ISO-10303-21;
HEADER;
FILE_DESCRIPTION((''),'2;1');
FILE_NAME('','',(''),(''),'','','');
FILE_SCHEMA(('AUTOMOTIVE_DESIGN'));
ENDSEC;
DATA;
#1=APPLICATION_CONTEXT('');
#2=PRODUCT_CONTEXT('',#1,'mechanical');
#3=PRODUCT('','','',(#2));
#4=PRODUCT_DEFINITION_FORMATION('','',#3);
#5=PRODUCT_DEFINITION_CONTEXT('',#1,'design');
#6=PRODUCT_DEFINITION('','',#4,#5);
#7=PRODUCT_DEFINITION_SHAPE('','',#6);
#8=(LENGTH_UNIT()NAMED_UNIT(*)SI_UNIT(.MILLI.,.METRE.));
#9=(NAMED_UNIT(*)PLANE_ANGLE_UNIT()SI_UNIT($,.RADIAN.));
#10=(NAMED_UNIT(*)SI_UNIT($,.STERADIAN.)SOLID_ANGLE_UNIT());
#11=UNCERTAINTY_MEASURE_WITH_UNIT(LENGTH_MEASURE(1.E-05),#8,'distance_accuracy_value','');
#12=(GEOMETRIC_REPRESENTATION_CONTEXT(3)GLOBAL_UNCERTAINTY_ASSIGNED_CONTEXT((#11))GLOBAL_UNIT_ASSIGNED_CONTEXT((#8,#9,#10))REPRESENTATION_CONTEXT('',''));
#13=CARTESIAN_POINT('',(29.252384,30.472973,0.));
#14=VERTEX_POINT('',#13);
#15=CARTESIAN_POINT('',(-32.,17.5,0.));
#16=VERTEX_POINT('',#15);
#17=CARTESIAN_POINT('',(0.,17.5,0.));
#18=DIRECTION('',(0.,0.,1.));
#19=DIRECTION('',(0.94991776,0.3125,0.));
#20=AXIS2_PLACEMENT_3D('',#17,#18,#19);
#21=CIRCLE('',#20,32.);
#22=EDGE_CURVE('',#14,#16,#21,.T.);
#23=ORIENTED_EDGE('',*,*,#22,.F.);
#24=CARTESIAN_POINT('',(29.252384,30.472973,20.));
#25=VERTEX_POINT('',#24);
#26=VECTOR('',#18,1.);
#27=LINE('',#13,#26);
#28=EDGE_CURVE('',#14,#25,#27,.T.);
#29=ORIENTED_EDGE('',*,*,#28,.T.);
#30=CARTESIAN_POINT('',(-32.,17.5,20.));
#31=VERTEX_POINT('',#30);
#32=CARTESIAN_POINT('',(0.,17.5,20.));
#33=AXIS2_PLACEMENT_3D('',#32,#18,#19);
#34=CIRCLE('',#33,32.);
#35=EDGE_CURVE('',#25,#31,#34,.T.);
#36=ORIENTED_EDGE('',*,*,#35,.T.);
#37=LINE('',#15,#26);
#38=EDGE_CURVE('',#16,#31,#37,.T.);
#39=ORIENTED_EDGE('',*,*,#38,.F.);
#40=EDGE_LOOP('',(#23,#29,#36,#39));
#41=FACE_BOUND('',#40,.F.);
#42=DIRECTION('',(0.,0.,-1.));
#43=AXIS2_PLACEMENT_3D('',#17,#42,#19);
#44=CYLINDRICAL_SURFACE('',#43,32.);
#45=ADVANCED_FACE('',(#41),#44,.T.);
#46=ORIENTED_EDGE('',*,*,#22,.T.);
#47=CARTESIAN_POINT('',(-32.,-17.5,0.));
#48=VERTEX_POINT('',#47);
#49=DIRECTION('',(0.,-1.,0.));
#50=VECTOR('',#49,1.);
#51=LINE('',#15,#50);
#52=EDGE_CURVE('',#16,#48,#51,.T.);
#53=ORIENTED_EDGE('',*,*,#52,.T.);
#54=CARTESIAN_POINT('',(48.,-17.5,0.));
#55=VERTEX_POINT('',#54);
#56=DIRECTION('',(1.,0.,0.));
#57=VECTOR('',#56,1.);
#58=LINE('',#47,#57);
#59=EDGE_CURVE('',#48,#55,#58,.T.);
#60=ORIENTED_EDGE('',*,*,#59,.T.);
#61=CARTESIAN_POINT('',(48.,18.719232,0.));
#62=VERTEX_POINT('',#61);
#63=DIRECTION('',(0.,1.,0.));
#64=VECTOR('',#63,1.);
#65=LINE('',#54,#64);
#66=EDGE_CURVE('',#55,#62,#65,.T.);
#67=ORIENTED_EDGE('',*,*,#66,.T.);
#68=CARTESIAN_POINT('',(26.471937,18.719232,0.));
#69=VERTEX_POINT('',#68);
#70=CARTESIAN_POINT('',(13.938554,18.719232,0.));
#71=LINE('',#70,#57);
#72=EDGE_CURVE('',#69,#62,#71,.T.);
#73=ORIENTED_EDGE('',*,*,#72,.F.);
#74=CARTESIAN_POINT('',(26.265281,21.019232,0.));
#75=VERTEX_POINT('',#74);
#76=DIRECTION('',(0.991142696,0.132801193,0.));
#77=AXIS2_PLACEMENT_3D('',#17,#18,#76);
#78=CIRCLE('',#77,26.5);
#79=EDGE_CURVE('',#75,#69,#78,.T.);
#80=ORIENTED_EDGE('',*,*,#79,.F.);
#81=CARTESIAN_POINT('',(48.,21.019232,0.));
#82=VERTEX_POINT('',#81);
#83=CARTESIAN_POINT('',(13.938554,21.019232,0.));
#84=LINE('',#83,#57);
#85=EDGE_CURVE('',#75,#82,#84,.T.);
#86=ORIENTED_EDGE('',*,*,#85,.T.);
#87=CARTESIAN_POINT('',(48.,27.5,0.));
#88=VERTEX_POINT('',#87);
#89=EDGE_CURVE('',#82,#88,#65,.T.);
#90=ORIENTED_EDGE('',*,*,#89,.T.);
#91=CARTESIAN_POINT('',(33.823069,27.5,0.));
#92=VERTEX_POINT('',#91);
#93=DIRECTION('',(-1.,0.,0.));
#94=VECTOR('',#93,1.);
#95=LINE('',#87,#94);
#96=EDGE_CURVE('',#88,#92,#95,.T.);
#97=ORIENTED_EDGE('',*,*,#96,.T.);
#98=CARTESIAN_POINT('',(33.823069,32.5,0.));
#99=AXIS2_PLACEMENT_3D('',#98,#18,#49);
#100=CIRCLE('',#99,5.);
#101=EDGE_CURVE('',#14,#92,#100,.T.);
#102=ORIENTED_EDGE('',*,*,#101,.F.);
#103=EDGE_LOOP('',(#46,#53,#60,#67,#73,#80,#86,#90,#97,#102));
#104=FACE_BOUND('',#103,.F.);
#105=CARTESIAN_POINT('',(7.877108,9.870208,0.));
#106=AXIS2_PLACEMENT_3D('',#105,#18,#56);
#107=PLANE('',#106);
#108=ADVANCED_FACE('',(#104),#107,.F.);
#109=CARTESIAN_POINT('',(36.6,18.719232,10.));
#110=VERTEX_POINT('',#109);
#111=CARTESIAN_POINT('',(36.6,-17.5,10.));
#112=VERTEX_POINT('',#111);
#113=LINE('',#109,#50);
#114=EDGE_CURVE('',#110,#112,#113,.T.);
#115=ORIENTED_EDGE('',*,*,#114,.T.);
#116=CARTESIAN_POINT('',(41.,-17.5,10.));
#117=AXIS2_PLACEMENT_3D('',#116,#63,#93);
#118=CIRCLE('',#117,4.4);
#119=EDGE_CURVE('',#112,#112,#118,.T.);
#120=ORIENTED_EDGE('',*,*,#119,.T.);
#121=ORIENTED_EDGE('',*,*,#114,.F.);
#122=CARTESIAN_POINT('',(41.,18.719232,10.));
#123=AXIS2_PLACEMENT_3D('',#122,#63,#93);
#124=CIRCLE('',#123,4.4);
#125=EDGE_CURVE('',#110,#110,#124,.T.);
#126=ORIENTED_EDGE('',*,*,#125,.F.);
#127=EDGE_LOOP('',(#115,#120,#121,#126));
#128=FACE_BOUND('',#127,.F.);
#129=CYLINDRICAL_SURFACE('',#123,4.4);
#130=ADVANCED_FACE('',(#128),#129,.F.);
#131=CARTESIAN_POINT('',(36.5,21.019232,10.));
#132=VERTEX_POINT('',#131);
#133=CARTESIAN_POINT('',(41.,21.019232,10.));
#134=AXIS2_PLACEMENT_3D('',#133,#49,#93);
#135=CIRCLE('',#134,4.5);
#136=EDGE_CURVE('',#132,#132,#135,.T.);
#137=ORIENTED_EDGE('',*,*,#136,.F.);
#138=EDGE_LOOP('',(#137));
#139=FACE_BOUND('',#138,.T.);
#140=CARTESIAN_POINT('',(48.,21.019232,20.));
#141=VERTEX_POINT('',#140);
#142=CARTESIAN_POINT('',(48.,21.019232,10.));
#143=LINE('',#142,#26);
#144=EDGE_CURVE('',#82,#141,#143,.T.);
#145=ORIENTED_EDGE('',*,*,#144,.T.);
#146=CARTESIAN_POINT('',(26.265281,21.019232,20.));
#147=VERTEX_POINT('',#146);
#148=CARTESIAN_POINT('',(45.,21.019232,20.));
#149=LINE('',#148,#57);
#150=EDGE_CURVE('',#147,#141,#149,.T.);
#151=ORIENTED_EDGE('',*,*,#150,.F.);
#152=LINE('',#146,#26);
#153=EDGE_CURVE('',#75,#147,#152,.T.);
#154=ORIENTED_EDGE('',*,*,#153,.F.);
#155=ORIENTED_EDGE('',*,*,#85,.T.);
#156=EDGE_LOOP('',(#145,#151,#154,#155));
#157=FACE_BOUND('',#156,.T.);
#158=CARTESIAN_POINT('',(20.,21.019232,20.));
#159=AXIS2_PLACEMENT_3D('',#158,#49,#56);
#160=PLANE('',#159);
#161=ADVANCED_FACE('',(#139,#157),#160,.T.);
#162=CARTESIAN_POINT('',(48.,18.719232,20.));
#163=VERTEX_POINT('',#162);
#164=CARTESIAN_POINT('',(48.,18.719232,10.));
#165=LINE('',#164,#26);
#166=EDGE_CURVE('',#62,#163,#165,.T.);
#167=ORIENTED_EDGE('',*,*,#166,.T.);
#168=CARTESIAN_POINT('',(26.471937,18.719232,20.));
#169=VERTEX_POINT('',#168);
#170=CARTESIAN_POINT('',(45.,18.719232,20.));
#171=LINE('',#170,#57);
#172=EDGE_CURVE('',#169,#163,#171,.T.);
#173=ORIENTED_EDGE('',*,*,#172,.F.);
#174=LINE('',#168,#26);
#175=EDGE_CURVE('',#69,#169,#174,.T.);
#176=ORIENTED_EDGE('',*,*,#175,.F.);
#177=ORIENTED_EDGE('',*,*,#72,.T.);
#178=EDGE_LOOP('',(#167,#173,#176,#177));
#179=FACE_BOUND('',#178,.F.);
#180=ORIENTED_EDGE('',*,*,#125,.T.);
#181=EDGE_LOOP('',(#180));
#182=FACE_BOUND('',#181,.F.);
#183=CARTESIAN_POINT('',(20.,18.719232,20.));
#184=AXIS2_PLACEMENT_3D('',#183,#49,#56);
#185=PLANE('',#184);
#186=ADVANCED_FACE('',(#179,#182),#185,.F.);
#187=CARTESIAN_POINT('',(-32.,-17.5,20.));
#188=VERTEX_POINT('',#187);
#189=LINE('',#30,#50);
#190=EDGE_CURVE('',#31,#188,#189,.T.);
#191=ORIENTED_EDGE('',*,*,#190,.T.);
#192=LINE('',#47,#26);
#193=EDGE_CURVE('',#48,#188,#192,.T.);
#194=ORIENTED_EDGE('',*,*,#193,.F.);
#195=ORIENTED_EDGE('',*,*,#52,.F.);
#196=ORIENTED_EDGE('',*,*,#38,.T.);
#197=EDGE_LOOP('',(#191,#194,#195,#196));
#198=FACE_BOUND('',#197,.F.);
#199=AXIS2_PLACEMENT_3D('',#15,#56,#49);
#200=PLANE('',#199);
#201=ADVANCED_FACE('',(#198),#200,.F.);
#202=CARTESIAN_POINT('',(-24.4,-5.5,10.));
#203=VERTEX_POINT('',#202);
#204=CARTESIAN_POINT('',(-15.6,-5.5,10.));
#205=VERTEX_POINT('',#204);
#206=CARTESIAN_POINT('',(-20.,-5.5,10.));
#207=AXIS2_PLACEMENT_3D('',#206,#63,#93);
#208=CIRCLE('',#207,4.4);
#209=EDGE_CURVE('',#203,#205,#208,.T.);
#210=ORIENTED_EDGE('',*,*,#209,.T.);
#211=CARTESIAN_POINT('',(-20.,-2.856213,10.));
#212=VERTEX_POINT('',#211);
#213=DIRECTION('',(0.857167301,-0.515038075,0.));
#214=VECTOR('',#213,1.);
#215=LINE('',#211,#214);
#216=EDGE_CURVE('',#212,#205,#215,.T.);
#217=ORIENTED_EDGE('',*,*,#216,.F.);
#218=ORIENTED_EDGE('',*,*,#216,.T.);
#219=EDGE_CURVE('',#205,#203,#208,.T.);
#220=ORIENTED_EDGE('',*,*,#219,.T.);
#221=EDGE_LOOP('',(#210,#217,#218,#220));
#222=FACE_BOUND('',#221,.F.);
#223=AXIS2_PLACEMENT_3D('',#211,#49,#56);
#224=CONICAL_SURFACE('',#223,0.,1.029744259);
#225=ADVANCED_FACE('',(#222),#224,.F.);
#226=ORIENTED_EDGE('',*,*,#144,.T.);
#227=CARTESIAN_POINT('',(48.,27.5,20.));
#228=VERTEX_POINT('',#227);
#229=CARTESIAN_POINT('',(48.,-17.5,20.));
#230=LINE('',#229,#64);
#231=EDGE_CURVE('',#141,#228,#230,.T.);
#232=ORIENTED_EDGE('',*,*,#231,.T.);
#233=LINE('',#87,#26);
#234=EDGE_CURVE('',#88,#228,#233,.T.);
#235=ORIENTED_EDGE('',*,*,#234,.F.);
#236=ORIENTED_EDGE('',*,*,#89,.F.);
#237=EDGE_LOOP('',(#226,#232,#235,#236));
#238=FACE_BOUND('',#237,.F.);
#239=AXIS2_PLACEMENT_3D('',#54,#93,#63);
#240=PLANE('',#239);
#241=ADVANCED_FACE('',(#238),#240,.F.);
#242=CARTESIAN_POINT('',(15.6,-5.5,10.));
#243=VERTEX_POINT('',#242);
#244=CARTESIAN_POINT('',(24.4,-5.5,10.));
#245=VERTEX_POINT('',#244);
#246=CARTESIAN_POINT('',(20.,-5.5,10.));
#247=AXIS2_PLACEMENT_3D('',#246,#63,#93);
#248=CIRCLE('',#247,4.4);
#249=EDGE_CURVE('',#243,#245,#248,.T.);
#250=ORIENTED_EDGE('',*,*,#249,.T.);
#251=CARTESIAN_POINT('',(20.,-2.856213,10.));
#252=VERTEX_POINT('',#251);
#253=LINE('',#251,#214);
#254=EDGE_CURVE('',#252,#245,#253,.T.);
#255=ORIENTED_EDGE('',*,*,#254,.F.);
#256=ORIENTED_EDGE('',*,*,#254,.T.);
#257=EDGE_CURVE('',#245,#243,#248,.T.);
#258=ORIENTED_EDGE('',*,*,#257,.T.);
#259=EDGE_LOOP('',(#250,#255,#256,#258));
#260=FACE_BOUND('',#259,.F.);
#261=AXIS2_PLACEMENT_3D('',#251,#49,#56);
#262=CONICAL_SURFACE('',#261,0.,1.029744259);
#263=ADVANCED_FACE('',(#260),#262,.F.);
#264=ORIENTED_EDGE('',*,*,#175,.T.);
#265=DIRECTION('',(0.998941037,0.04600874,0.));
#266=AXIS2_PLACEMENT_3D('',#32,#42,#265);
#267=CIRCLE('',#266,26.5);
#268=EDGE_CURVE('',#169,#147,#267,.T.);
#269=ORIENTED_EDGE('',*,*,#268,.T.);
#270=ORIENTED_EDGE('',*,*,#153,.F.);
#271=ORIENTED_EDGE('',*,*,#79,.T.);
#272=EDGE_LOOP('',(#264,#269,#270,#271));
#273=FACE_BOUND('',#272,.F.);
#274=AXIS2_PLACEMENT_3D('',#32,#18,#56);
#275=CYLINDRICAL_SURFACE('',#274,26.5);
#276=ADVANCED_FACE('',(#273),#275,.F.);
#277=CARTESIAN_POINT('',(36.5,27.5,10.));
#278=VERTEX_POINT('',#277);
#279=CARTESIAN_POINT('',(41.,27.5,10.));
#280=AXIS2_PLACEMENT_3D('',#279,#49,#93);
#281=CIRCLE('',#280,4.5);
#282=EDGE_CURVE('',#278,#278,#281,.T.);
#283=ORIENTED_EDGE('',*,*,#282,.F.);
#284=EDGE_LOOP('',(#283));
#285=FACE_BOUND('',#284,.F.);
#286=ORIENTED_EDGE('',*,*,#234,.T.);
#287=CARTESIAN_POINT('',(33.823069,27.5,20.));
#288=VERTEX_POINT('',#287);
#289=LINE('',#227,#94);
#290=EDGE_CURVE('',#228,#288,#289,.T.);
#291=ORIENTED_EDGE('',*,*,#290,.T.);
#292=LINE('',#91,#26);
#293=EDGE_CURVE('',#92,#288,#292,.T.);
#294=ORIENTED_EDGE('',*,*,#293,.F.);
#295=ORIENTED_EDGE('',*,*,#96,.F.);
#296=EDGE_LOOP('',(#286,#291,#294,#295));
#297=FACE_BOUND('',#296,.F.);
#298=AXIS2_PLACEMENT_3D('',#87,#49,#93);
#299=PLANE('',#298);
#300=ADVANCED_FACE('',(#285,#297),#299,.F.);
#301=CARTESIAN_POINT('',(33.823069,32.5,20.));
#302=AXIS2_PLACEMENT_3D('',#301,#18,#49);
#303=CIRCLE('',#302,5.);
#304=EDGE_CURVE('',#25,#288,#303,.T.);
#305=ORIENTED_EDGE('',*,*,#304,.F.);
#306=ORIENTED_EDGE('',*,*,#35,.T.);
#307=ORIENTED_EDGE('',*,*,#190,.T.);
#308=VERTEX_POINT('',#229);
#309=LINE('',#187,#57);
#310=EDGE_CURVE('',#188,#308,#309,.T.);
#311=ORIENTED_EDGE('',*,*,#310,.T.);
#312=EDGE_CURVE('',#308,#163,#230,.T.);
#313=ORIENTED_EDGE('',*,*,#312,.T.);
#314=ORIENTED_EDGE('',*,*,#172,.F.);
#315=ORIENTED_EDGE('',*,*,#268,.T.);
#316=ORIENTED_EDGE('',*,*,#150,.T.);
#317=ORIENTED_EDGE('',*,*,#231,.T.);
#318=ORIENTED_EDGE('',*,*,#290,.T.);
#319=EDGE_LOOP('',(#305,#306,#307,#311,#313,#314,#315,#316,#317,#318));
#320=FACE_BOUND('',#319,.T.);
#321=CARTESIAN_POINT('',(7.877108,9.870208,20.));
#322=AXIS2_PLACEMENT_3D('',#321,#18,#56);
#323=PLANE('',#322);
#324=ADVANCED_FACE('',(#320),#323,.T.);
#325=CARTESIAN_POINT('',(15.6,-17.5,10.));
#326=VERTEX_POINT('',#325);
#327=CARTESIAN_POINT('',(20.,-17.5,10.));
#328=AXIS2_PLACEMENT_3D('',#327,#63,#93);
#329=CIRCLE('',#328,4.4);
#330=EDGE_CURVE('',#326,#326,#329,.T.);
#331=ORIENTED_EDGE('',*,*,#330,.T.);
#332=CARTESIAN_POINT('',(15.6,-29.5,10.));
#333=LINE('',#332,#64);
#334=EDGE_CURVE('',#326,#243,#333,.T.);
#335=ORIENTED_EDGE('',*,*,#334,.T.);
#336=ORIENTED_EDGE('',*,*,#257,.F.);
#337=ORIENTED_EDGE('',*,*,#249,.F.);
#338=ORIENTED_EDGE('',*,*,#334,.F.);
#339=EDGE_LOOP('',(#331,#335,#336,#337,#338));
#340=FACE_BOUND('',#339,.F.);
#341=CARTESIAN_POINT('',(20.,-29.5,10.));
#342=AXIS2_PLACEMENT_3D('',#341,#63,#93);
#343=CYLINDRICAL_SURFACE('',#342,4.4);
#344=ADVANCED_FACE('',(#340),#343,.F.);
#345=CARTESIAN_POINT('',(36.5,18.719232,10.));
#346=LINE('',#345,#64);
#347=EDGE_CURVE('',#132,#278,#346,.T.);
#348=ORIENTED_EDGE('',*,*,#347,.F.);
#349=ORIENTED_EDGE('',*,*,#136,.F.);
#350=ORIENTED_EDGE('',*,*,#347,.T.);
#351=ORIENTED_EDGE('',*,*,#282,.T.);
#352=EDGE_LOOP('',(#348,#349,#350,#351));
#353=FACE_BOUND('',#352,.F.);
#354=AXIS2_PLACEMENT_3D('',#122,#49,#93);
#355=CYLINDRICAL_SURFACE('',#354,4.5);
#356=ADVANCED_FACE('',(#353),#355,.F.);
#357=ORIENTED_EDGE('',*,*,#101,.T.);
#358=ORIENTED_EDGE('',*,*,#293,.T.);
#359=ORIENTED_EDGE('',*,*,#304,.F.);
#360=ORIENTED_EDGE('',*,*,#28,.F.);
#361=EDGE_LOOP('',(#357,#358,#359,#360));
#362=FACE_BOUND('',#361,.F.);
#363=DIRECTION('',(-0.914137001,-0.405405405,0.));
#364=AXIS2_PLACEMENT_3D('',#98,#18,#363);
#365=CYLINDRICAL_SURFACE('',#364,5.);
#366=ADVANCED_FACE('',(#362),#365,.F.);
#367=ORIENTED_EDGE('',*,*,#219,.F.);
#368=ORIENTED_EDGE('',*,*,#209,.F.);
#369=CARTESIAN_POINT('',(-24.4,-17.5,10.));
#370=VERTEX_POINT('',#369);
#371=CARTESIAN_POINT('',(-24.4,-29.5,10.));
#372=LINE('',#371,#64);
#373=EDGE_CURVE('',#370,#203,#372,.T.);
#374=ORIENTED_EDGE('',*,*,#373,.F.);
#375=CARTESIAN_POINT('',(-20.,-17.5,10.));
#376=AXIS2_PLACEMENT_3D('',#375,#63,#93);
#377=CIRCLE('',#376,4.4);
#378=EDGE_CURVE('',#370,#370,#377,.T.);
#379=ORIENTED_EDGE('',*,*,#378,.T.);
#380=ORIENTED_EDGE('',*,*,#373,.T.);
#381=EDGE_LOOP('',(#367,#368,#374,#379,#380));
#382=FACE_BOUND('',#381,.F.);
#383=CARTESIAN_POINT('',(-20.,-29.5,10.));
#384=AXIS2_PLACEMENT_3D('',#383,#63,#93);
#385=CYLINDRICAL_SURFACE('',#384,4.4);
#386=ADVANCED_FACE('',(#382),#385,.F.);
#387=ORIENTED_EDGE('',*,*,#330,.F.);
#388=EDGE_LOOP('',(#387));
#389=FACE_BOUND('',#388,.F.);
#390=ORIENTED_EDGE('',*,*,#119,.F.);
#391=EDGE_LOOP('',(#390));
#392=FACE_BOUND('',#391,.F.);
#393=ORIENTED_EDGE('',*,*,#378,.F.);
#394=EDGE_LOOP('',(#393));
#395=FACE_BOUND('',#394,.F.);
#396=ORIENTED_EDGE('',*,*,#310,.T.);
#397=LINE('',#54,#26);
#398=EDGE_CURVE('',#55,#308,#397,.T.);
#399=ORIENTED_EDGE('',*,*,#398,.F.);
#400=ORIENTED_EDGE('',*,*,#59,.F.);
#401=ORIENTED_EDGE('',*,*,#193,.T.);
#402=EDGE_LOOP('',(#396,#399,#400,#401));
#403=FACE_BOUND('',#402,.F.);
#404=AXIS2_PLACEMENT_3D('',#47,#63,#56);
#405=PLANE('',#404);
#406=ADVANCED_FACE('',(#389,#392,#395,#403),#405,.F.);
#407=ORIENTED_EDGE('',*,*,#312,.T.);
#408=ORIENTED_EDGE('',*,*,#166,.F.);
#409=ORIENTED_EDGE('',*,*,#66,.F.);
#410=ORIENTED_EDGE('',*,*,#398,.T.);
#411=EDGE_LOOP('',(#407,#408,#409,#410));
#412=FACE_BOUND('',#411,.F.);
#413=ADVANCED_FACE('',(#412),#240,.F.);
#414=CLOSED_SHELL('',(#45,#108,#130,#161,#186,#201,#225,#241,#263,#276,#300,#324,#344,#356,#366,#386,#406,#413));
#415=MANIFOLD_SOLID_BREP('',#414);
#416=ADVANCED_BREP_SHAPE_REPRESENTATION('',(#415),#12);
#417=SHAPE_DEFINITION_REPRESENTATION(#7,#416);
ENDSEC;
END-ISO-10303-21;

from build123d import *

# Parameters (mm, degrees)
F1_DEPTH  = 20
F2_R      = 26.5
F3_DEPTH  = 20
F4_W      = 50
F4_H      = 2.3
F5_DEPTH  = 20.001
F7_D      = 8.8
F7_DEPTH  = 12
F7_TIP    = 2.6437867237
F8_R      = 5
F10_D     = 8.8
F10_DEPTH = 36.2202316189
F11_D     = 9
F11_DEPTH = 30.7817683811


# Not quite as in the source:
# - a feature of the source that left no trace in its solid (it failed there, or was rolled back) is left out


with BuildPart() as f1:
    # F0 (on Top) → F1 (new body)
    with BuildSketch(Plane.XY):
        with BuildLine():
            ThreePointArc((30.3973683071, 27.5), (-5.0638036184, 49.0968019412), (-32, 17.5))
            Line((-32, 17.5), (-32, -17.5))
            Line((-32, -17.5), (48, -17.5))
            Line((48, -17.5), (48, 27.5))
            Line((48, 27.5), (30.3973683071, 27.5))
        make_face()
    extrude(amount=F1_DEPTH)

    # F2 (on face) → F3 (cut, through all)
    with BuildSketch(Plane.XY.offset(20)):
        with Locations((0, 17.5)):
            Circle(F2_R)
    extrude(amount=-F3_DEPTH, mode=Mode.SUBTRACT)

    # F4 (on face) → F5 (cut, through all)
    with BuildSketch(Plane.XY.offset(20)):
        with Locations((45, 19.8692316189)):
            Rectangle(F4_W, F4_H)
    extrude(amount=-F5_DEPTH, mode=Mode.SUBTRACT)

    # F7
    with Locations(Plane.XZ.offset(17.5)):
        with Locations((-20, 10), (20, 10)):
            Hole(F7_D / 2, depth=F7_DEPTH)
            with Locations((0, 0, -(F7_DEPTH + F7_TIP / 2))):  # 118° drill point
                Cone(0, F7_D / 2, F7_TIP, mode=Mode.SUBTRACT)

    # F8
    f8_edges = [f1.edges().sort_by_distance(p)[0] for p in [
        (30.397368, 27.5, 10),
    ]]
    fillet(f8_edges, radius=F8_R)

    # F10 (through all, one way)
    with BuildSketch(Plane(origin=(0, 18.7192316189, 0), x_dir=(-1, 0, 0), z_dir=(0, 1, 0))):
        with Locations((-41, 10)):
            Circle(F10_D / 2)
    extrude(amount=-F10_DEPTH, mode=Mode.SUBTRACT)

    # F11 (through all, one way)
    with BuildSketch(Plane(origin=(0, 18.7192316189, 0), x_dir=(-1, 0, 0), z_dir=(0, -1, 0))):
        with Locations((-41, -10)):
            Circle(F11_D / 2)
    extrude(amount=-F11_DEPTH, mode=Mode.SUBTRACT)


solid = f1.part
